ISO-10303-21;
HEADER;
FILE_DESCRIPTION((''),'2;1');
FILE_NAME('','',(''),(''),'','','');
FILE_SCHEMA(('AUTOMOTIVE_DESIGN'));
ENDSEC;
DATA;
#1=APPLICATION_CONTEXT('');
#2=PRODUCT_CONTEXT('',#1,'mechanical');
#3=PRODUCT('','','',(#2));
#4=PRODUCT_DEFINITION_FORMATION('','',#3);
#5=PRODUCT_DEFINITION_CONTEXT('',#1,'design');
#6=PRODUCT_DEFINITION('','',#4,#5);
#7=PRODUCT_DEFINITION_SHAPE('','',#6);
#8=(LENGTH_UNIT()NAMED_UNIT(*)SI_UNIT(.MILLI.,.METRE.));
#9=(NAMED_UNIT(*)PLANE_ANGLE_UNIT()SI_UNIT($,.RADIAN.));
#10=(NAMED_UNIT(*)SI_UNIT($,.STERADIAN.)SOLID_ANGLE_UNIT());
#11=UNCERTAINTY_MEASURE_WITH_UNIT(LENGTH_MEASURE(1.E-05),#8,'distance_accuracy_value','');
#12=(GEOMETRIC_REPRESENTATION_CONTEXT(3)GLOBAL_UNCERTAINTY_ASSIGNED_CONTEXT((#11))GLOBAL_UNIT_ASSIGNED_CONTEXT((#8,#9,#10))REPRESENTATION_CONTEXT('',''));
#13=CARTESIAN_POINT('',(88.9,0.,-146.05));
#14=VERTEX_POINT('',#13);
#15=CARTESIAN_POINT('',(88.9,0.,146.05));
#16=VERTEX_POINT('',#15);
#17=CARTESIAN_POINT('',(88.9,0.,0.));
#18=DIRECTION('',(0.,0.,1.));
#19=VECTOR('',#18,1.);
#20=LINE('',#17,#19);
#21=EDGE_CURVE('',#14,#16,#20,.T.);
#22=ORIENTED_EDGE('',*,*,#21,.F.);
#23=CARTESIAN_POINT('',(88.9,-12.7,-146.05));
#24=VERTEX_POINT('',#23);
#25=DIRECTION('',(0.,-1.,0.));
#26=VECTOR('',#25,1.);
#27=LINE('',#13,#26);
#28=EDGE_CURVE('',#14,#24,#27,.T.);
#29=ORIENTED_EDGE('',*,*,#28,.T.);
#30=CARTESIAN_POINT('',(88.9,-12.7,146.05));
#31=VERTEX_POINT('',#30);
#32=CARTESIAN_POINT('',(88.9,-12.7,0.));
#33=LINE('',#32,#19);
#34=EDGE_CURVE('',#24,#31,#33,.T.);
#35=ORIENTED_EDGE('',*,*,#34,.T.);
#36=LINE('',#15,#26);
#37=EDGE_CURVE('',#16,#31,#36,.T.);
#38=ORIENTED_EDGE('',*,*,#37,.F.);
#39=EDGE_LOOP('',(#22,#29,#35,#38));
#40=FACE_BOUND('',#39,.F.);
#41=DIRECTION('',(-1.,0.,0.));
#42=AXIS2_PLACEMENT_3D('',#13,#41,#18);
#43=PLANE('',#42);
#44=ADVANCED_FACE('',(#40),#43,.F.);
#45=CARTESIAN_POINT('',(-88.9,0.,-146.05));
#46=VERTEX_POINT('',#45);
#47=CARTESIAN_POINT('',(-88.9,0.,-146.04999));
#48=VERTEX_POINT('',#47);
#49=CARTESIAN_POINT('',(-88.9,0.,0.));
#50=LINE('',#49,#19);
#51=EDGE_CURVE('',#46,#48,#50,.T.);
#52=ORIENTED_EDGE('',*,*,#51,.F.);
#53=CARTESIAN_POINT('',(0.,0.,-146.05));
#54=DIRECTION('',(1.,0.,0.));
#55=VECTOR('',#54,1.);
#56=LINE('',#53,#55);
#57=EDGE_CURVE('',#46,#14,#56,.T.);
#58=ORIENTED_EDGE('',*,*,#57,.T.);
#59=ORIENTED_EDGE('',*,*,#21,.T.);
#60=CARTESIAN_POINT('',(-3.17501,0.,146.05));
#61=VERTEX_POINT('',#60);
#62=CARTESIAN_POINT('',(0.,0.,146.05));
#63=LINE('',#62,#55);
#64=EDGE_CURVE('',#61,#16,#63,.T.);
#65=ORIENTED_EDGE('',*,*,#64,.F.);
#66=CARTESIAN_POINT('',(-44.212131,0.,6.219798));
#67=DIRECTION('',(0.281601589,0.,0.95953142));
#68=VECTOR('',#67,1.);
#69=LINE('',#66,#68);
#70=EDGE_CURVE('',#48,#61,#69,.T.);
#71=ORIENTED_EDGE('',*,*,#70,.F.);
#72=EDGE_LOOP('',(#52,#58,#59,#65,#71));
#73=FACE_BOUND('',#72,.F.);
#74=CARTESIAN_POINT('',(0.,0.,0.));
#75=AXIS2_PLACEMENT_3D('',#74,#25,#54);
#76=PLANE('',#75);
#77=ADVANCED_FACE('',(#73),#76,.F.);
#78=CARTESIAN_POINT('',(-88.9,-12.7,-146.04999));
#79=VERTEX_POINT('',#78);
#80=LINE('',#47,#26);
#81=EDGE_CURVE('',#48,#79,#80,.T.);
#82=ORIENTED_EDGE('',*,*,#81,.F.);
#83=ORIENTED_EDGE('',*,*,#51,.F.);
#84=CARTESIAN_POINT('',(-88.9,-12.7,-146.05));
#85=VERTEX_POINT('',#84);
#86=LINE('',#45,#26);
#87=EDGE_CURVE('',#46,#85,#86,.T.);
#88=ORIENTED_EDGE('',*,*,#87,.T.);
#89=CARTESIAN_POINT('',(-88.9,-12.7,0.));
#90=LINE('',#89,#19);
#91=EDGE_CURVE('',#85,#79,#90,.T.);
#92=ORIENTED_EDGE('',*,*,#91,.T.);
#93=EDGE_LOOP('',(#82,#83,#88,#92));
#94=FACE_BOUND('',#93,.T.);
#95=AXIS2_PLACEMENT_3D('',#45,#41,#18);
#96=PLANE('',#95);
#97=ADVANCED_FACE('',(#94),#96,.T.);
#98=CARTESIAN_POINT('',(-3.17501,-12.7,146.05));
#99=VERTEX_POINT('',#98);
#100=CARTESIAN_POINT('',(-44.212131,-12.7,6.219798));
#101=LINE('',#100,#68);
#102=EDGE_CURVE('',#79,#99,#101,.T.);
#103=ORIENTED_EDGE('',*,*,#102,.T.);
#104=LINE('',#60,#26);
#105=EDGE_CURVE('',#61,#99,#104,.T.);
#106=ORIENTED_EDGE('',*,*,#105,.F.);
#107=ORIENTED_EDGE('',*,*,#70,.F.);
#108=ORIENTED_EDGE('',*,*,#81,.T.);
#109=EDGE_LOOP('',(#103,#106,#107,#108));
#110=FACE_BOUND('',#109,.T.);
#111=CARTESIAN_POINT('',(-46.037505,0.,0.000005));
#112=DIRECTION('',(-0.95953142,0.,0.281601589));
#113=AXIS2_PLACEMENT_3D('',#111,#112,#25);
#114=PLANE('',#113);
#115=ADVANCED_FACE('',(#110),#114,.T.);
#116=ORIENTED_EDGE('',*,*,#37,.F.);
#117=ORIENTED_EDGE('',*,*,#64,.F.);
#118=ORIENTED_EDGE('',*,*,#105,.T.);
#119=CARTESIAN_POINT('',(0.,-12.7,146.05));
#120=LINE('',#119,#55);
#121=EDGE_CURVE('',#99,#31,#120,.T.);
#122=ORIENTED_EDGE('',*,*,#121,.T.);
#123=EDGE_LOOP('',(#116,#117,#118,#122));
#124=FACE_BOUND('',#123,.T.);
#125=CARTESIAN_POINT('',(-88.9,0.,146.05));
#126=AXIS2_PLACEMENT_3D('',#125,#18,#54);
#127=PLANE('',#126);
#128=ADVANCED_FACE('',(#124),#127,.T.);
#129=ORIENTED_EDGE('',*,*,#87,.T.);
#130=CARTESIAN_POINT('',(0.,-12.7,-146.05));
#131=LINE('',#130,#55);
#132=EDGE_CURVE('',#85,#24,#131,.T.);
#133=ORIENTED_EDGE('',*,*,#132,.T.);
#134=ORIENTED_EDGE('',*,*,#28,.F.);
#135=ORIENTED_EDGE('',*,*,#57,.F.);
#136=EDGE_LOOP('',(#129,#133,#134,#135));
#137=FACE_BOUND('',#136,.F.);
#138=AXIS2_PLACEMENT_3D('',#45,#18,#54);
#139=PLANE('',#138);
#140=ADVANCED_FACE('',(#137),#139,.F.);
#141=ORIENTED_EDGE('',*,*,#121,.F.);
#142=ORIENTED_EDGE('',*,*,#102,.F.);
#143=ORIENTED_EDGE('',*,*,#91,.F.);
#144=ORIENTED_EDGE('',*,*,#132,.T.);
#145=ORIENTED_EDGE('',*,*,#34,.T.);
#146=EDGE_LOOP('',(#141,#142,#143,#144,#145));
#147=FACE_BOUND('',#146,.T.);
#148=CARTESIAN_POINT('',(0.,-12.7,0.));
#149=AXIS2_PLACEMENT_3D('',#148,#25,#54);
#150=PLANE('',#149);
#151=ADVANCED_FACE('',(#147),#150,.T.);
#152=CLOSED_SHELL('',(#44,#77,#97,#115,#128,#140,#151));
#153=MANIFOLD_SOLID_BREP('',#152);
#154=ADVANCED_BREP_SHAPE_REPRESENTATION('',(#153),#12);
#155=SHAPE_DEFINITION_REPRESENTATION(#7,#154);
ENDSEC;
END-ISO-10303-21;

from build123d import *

# Parameters (mm, degrees)
F0_W     = 177.8
F0_H     = 292.1
F1_DEPTH = 12.7
F2_SIZE2 = 85.72499
F2_SIZE  = 292.09999


# Not quite as in the source:
# - a fillet or chamfer is up to 0.001 mm smaller than in the source, because OpenCascade refuses the exact size


with BuildPart() as f1:
    # F0 (on Front) → F1 (new body)
    with BuildSketch(Plane.XZ):
        Rectangle(F0_W, F0_H)
    extrude(amount=F1_DEPTH)

    # F2 (size 292.1 and 85.725 in the source; OpenCascade refuses exactly that, so slightly less here)
    f2_edges = [f1.edges().sort_by_distance(p)[0] for p in [
        (-88.9, -6.35, 146.05),
    ]]
    f2_side = f1.faces().sort_by_distance((-88.9, -6.35, 0))[0]
    chamfer(f2_edges, length=F2_SIZE, length2=F2_SIZE2, reference=f2_side)


solid = f1.part
